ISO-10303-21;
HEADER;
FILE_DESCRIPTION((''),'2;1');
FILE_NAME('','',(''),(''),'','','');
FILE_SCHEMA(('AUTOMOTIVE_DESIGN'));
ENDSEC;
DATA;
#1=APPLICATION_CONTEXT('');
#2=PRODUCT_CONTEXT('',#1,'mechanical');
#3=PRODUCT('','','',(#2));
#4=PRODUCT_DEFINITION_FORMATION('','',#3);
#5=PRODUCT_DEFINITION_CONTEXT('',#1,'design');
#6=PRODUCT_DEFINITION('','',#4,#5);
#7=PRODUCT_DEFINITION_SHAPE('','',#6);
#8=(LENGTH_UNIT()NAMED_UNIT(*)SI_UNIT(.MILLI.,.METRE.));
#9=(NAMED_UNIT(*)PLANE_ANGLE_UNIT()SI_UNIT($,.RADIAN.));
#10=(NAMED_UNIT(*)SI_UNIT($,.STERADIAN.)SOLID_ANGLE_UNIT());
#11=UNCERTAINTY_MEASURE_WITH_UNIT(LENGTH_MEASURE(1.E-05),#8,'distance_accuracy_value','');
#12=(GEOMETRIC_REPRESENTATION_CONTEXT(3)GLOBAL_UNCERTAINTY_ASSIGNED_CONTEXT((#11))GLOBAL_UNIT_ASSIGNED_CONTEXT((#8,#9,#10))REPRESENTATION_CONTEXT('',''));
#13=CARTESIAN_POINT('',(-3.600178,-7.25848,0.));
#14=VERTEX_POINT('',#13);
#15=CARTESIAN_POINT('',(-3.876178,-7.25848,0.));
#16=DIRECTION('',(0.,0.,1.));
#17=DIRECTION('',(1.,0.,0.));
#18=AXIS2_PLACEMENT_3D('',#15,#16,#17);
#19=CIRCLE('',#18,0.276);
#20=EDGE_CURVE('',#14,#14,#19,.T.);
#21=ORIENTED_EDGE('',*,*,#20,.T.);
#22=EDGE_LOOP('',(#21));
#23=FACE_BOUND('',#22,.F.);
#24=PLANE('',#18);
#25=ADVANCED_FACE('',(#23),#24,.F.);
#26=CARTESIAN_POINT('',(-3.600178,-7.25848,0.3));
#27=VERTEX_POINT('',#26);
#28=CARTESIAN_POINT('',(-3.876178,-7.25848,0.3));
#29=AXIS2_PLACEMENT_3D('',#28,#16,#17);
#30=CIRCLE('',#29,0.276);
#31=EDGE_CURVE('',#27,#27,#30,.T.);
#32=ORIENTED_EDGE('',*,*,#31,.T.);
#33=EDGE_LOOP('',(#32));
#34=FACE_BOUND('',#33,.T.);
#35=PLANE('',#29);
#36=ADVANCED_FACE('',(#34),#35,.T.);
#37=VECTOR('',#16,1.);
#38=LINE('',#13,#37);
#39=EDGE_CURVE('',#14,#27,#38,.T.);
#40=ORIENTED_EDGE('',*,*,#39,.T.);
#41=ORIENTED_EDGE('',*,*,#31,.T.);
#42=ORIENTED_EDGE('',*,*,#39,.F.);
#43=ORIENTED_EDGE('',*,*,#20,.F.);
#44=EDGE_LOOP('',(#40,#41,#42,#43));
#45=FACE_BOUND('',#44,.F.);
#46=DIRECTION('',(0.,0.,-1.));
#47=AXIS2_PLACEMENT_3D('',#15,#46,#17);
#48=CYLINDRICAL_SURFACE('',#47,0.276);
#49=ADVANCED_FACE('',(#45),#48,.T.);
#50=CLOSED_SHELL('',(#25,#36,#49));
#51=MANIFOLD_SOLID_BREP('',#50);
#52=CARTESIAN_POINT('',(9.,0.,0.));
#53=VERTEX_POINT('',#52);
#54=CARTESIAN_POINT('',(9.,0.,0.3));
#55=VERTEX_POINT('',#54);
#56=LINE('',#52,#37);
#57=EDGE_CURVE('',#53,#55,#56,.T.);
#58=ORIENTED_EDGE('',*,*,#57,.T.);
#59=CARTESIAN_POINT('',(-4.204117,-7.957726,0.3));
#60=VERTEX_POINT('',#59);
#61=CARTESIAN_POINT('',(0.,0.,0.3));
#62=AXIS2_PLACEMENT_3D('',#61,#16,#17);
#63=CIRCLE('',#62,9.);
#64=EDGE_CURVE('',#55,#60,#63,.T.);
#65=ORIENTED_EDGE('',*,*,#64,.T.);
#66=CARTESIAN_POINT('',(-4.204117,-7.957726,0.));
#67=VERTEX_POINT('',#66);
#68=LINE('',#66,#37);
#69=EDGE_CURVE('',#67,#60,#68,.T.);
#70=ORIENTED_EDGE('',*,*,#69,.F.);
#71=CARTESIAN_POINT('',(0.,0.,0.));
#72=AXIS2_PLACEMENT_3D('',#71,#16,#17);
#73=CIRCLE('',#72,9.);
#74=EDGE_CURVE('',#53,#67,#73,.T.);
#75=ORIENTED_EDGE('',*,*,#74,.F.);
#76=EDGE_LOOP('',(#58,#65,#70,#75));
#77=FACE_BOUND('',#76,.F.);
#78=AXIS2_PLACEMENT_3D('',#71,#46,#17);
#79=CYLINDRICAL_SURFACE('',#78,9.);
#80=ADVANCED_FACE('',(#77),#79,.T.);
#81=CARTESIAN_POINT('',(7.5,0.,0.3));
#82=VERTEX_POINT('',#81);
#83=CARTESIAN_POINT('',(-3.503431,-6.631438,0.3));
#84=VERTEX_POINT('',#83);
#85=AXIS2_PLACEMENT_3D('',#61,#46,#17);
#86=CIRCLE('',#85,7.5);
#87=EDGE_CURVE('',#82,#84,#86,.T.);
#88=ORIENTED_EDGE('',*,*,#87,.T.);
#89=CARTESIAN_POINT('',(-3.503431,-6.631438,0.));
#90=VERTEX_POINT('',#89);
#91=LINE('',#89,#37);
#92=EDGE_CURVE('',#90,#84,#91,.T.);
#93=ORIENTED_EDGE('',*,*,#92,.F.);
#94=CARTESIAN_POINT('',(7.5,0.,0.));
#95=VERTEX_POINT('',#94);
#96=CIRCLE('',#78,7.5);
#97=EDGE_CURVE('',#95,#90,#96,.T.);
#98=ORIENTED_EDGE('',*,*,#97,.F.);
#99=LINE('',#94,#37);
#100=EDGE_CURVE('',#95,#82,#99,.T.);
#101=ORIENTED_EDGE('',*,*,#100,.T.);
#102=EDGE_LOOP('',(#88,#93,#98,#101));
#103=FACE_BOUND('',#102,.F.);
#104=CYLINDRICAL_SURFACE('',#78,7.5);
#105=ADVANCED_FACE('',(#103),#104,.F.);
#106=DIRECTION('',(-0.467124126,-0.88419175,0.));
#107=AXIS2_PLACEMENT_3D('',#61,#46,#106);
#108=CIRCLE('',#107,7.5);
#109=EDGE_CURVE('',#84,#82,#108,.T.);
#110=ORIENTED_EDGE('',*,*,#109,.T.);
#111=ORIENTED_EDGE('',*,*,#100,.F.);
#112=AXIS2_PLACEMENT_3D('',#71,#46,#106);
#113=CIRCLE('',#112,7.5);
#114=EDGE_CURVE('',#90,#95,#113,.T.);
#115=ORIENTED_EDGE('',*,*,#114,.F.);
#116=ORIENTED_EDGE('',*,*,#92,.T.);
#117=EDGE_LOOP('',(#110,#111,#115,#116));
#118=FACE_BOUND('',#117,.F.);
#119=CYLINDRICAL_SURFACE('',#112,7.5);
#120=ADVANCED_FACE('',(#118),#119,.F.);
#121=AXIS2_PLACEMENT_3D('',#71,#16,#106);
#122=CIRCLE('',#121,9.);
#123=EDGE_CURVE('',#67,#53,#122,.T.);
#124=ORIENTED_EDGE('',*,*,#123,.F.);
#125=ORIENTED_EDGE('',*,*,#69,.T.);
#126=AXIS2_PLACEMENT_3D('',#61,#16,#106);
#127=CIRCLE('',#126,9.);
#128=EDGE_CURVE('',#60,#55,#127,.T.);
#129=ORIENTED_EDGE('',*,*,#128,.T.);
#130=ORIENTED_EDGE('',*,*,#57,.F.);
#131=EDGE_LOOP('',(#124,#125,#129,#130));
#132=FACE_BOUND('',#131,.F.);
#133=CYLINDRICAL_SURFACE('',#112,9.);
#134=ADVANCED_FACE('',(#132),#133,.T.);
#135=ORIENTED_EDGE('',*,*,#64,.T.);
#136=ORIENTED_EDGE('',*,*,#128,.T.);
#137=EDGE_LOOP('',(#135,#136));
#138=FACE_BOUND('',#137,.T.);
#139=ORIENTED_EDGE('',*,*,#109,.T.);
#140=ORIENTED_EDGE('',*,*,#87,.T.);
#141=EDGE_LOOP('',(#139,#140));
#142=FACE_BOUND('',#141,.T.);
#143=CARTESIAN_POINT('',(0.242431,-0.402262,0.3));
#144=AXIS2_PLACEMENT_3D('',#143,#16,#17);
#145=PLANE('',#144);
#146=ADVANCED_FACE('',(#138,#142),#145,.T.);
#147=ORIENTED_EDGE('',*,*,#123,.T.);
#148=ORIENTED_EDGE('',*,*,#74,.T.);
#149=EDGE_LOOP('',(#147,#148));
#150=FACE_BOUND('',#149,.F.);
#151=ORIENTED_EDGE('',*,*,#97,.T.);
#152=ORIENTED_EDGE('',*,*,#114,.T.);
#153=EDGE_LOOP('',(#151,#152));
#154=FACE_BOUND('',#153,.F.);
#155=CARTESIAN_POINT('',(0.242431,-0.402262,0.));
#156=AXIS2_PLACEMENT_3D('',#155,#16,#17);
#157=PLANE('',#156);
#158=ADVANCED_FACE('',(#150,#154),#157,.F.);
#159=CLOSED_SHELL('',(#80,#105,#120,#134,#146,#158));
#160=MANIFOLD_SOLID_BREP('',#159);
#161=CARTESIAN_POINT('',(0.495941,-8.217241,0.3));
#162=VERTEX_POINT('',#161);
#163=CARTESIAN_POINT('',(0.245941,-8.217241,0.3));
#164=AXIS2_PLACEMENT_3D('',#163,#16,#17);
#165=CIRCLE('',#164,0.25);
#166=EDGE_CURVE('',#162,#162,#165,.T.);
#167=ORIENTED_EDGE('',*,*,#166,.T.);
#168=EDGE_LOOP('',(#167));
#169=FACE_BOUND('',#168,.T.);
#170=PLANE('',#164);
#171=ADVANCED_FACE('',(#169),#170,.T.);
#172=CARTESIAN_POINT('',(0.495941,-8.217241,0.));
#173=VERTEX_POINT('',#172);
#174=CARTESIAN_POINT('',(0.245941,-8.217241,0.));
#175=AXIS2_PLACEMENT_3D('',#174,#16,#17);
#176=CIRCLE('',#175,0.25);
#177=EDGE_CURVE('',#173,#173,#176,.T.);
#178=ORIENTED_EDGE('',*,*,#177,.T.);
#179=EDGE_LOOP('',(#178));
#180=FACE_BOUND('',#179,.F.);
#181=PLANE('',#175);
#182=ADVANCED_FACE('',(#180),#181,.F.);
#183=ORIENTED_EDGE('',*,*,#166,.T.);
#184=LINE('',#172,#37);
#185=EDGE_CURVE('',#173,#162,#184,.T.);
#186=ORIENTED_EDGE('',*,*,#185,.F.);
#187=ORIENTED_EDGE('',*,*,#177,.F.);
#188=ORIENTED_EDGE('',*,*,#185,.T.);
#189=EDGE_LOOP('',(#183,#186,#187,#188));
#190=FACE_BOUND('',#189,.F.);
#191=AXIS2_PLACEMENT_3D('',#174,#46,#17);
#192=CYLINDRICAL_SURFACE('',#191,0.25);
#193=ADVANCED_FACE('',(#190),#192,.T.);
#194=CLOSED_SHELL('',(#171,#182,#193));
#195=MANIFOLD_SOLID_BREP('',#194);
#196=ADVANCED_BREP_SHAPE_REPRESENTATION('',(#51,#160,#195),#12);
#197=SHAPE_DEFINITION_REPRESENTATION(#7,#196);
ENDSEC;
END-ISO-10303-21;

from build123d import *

# Parameters (mm, degrees)
F1_R     = 0.276
F2_DEPTH = 0.3
F1_R_2   = 0.25


# Not quite as in the source:
# - a feature of the source that left no trace in its solid (it failed there, or was rolled back) is left out


with BuildPart() as f2:
    # F1 (on face) → F2 (new body)
    with BuildSketch(Plane.XY):
        with Locations((-3.8761778269, -7.2584804147)):
            Circle(F1_R)
    extrude(amount=F2_DEPTH)


with BuildPart() as f2b:
    # F1 (on face) → F2, piece 2 (new body)
    with BuildSketch(Plane.XY):
        with Locations((0.2459411263, -8.2172408689)):
            Circle(F1_R_2)
    extrude(amount=F2_DEPTH)


with BuildPart() as f2c:
    # F0 (on Top) → F2, piece 3 (new body)
    with BuildSketch(Plane.XY):
        with BuildLine():
            ThreePointArc((-4.2041171366, -7.9577257494), (4.6455863877, -7.7083413984), (9, 0))
            ThreePointArc((9, 0), (-4.6455863877, 7.7083413984), (-4.2041171366, -7.9577257494))
        make_face()
        with BuildLine():
            ThreePointArc((7.5, 0), (3.8713219897, -6.423617832), (-3.5034309471, -6.6314381245))
            ThreePointArc((-3.5034309471, -6.6314381245), (-3.8713219897, 6.423617832), (7.5, 0))
        make_face(mode=Mode.SUBTRACT)
    extrude(amount=F2_DEPTH)


solid = Compound([f2.part, f2b.part, f2c.part])
